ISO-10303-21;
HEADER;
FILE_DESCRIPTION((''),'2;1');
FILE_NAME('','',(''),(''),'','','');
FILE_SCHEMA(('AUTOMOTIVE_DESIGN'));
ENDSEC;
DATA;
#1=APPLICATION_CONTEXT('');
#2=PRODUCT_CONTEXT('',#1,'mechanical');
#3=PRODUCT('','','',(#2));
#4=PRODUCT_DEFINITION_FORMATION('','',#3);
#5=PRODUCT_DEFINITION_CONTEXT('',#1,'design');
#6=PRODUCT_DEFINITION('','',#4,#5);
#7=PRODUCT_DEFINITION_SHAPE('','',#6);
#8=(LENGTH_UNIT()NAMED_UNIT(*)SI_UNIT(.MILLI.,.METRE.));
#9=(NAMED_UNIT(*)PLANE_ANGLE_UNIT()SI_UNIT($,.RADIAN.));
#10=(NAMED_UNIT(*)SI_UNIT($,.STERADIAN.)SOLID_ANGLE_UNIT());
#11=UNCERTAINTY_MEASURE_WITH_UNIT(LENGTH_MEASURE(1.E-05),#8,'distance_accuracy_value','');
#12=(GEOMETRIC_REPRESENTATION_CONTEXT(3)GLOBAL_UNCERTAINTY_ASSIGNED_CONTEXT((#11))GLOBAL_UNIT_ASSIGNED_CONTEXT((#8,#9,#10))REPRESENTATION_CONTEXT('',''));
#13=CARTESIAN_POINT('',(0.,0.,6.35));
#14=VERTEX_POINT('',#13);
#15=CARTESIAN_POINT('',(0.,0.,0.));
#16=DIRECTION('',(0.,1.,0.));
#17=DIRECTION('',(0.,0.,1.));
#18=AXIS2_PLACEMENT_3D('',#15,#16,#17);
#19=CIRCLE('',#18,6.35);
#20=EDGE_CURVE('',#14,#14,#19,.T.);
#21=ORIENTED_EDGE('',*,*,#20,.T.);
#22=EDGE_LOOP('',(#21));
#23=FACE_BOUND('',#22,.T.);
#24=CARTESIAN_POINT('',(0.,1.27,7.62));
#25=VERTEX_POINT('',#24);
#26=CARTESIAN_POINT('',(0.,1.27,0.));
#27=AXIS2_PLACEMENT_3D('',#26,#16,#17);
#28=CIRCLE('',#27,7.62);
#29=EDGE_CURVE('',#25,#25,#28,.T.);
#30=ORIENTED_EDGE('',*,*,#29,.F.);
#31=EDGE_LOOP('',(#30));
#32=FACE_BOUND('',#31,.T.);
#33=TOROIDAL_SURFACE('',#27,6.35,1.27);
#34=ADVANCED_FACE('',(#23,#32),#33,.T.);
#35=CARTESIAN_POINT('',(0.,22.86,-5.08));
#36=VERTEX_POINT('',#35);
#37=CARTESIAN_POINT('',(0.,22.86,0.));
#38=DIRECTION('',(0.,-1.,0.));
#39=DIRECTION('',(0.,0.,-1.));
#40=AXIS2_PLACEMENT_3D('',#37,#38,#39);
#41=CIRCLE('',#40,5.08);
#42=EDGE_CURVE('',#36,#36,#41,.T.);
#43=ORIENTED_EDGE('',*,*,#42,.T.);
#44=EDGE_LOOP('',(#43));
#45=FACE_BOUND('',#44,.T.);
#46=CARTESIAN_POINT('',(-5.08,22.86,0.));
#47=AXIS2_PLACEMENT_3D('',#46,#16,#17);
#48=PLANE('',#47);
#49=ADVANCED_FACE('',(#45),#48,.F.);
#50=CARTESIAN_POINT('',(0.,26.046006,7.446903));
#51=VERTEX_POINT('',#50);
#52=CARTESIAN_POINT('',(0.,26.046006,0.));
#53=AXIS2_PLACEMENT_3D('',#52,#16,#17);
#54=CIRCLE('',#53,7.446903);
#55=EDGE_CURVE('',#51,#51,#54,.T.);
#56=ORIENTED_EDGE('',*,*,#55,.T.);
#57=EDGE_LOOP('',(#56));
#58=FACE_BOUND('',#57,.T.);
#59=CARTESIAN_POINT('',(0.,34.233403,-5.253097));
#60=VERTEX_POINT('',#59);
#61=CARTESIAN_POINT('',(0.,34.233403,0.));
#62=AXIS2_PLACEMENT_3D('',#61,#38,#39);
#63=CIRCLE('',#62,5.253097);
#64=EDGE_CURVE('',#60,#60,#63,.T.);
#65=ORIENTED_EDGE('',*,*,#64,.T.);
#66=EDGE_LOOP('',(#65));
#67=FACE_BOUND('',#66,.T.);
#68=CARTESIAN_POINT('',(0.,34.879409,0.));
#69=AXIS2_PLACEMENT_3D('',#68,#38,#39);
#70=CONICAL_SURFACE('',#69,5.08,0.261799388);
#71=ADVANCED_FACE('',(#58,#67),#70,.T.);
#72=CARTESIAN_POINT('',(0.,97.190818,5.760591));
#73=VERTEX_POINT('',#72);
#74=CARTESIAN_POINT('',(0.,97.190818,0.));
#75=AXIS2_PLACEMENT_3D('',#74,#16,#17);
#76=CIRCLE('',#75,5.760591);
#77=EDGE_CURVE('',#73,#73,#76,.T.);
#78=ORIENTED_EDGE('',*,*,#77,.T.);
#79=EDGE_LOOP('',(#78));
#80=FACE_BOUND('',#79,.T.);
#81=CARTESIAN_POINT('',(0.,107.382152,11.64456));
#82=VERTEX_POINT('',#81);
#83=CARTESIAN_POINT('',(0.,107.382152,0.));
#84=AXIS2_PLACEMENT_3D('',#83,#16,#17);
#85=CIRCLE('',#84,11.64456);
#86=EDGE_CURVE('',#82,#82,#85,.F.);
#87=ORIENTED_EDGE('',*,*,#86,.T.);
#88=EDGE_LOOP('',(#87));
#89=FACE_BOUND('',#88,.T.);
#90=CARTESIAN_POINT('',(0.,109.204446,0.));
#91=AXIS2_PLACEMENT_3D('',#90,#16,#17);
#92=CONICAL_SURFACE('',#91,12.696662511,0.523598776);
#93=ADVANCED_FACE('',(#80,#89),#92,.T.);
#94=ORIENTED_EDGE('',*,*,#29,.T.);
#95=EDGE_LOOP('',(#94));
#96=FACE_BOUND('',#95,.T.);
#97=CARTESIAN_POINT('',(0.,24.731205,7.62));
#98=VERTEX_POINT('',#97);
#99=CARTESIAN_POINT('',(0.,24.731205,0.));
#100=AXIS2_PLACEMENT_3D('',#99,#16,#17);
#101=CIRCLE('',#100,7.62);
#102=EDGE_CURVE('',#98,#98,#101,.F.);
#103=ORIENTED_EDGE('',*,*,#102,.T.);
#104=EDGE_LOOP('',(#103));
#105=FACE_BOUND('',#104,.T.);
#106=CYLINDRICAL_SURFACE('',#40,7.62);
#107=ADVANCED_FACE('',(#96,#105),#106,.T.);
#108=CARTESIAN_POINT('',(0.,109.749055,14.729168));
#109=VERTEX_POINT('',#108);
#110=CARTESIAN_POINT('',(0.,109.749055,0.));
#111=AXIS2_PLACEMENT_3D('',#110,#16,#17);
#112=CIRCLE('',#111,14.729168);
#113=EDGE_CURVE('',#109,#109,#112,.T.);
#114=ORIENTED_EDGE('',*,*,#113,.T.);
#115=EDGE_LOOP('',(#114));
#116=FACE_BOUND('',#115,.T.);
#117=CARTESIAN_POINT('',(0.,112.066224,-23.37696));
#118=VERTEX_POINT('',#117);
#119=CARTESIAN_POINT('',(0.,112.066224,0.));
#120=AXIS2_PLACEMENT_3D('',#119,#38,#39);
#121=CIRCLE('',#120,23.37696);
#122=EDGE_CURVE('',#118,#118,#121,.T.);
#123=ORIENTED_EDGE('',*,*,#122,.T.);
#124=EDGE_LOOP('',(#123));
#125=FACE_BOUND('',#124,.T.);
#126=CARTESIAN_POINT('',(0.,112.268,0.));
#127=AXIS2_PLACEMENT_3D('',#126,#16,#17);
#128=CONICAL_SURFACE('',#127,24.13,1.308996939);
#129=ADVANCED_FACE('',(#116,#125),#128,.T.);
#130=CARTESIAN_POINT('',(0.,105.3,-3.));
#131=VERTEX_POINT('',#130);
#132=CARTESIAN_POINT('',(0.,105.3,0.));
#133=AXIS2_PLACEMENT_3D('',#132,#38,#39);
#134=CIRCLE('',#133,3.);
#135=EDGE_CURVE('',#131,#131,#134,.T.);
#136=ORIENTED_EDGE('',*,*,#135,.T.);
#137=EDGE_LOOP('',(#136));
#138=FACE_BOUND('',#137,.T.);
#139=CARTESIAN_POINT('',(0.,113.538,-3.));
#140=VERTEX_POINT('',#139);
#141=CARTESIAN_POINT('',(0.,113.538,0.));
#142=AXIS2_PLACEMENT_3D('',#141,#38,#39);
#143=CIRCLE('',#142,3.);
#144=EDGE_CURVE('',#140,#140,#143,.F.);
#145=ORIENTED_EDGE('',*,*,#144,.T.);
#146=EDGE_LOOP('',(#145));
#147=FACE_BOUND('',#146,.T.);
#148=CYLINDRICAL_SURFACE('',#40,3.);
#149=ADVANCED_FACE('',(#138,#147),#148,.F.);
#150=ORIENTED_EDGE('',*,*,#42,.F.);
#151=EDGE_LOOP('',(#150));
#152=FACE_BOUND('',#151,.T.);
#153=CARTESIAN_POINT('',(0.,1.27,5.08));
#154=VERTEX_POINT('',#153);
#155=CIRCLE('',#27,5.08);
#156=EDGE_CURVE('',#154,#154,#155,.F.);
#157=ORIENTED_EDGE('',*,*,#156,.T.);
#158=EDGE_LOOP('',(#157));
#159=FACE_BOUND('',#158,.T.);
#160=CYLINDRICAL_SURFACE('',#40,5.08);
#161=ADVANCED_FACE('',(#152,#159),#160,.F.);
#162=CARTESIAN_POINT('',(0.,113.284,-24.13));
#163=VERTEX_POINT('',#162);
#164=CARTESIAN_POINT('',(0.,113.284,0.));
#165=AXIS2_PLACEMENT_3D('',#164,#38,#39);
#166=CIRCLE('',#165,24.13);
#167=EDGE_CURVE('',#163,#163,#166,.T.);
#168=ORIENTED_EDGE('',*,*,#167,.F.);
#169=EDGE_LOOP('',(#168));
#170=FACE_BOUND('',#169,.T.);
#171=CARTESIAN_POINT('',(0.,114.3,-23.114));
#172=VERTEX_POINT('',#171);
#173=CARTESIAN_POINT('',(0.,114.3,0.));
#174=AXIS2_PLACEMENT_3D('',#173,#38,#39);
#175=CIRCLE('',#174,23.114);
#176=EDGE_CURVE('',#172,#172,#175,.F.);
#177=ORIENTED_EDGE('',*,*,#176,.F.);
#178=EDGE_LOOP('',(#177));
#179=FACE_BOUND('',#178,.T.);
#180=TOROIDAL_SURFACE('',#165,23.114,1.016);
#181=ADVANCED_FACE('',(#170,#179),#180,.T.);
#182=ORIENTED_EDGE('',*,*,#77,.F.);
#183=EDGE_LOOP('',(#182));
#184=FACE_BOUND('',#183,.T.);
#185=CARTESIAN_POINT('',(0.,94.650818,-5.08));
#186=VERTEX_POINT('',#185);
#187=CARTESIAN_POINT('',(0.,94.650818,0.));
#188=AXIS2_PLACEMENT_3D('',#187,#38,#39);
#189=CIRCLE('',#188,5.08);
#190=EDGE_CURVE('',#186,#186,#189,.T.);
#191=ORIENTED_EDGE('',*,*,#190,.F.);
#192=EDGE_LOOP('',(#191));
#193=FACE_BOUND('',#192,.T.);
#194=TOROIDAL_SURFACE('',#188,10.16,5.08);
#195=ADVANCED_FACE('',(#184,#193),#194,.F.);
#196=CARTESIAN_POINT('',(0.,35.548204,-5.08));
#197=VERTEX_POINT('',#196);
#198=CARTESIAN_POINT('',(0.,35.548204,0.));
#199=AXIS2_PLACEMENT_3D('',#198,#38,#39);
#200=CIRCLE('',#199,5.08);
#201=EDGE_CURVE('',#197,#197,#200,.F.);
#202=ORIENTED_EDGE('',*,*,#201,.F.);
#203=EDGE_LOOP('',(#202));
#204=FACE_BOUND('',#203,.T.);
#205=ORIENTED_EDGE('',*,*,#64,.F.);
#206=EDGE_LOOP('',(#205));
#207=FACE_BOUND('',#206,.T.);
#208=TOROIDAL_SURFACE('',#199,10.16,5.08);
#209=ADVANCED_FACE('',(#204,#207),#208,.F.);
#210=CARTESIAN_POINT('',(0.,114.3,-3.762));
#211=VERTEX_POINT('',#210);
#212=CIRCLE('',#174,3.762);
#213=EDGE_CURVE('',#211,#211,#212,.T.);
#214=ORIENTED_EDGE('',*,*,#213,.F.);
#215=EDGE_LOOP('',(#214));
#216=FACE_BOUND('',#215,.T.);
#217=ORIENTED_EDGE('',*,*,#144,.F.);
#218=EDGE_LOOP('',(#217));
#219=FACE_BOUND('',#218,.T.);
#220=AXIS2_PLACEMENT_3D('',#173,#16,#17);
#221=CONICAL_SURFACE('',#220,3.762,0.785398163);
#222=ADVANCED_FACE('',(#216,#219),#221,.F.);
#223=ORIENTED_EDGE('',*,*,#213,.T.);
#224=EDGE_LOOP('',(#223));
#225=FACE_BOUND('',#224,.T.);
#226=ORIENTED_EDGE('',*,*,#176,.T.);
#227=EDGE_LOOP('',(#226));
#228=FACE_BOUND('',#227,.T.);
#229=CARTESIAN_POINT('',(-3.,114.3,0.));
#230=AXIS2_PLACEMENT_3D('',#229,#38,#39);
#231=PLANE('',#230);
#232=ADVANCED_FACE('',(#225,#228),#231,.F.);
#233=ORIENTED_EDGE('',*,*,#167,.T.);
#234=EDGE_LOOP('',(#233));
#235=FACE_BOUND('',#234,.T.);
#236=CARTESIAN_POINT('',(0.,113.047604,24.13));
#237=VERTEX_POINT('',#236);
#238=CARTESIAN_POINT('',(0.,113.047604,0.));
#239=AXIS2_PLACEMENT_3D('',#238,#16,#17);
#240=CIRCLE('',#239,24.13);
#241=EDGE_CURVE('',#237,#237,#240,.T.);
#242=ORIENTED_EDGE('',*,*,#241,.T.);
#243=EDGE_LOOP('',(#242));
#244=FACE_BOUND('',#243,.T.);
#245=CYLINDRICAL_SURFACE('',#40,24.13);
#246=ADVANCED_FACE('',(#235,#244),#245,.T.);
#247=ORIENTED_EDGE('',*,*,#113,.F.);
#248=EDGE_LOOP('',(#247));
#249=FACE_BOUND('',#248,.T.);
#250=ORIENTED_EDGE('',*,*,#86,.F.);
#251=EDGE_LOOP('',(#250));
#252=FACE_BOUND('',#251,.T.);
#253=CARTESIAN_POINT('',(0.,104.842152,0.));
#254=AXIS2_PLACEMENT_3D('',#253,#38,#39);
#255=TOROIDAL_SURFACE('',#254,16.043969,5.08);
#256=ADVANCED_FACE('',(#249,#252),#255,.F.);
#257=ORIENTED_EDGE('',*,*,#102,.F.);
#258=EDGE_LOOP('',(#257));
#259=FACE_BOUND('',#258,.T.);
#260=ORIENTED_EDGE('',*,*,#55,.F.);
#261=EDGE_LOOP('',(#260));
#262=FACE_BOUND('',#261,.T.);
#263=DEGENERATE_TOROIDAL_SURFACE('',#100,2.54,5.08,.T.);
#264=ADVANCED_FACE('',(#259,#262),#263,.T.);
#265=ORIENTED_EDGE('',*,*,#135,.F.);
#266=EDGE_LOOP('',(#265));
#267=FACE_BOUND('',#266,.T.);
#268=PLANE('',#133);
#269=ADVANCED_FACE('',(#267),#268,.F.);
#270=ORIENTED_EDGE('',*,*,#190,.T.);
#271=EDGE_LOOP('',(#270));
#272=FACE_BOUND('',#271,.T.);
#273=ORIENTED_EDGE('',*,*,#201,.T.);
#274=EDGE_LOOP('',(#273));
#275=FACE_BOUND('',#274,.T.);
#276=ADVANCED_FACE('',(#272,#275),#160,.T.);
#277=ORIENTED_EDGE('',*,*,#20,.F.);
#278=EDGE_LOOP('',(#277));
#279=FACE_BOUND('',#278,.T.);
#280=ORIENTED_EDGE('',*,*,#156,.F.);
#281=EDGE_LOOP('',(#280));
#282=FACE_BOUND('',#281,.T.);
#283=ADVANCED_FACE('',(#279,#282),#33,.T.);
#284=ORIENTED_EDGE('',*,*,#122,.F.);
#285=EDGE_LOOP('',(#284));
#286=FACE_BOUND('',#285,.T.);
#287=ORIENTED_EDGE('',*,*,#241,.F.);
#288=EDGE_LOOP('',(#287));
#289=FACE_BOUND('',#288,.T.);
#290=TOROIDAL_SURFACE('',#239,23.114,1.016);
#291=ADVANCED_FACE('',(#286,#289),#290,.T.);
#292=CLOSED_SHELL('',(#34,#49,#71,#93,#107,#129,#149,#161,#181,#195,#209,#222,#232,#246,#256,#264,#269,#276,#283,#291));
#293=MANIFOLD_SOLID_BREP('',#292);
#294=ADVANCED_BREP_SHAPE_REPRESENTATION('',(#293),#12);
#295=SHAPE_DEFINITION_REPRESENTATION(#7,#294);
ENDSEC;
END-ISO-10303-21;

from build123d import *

# Parameters (mm, degrees)
CHAMFER1_SIZE = 0.762
FILLET1_R     = 1.27
FILLET2_R     = 1.016
FILLET3_R     = 5.08


with BuildPart() as part:
    # Sketch1 → Revolve1 (revolve)
    with BuildSketch(Plane.XY, mode=Mode.PRIVATE) as revolve1_sk:
        Polygon((-5.08, 96.012), (-5.08, 34.879409051), (-7.62, 25.4), (-7.62, 0), (-5.08, 0), (-5.08, 22.86), (0, 22.86), (0, 105.3), (-3, 105.3), (-3, 114.3), (-24.13, 114.3), (-24.13, 112.268), (-12.696662511, 109.204446453), align=None)
    revolve(revolve1_sk.sketch.rotate(Axis((0, 22.86, 0), (0, 1, 0)), 270), axis=Axis((0, 22.86, 0), (0, 1, 0)))

    # Chamfer1
    chamfer1_edges = [part.edges().sort_by_distance(p)[0] for p in [
        (0, 114.3, 3),
    ]]
    chamfer(chamfer1_edges, length=CHAMFER1_SIZE)

    # Fillet1
    fillet1_edges = [part.edges().sort_by_distance(p)[0] for p in [
        (0, 0, 5.08),
        (0, 0, 7.62),
    ]]
    fillet(fillet1_edges, radius=FILLET1_R - 0.0001)  # a hair under: the kernel refuses the full size

    # Fillet2
    fillet2_edges = [part.edges().sort_by_distance(p)[0] for p in [
        (0, 112.268, 24.13),
        (0, 114.3, 24.13),
    ]]
    fillet(fillet2_edges, radius=FILLET2_R)

    # Fillet3
    fillet3_edges = [part.edges().sort_by_distance(p)[0] for p in [
        (0, 109.204446453, 12.696662511),
        (0, 25.4, 7.62),
        (0, 34.879409051, 5.08),
        (0, 96.012, 5.08),
    ]]
    fillet(fillet3_edges, radius=FILLET3_R)


solid = part.part
